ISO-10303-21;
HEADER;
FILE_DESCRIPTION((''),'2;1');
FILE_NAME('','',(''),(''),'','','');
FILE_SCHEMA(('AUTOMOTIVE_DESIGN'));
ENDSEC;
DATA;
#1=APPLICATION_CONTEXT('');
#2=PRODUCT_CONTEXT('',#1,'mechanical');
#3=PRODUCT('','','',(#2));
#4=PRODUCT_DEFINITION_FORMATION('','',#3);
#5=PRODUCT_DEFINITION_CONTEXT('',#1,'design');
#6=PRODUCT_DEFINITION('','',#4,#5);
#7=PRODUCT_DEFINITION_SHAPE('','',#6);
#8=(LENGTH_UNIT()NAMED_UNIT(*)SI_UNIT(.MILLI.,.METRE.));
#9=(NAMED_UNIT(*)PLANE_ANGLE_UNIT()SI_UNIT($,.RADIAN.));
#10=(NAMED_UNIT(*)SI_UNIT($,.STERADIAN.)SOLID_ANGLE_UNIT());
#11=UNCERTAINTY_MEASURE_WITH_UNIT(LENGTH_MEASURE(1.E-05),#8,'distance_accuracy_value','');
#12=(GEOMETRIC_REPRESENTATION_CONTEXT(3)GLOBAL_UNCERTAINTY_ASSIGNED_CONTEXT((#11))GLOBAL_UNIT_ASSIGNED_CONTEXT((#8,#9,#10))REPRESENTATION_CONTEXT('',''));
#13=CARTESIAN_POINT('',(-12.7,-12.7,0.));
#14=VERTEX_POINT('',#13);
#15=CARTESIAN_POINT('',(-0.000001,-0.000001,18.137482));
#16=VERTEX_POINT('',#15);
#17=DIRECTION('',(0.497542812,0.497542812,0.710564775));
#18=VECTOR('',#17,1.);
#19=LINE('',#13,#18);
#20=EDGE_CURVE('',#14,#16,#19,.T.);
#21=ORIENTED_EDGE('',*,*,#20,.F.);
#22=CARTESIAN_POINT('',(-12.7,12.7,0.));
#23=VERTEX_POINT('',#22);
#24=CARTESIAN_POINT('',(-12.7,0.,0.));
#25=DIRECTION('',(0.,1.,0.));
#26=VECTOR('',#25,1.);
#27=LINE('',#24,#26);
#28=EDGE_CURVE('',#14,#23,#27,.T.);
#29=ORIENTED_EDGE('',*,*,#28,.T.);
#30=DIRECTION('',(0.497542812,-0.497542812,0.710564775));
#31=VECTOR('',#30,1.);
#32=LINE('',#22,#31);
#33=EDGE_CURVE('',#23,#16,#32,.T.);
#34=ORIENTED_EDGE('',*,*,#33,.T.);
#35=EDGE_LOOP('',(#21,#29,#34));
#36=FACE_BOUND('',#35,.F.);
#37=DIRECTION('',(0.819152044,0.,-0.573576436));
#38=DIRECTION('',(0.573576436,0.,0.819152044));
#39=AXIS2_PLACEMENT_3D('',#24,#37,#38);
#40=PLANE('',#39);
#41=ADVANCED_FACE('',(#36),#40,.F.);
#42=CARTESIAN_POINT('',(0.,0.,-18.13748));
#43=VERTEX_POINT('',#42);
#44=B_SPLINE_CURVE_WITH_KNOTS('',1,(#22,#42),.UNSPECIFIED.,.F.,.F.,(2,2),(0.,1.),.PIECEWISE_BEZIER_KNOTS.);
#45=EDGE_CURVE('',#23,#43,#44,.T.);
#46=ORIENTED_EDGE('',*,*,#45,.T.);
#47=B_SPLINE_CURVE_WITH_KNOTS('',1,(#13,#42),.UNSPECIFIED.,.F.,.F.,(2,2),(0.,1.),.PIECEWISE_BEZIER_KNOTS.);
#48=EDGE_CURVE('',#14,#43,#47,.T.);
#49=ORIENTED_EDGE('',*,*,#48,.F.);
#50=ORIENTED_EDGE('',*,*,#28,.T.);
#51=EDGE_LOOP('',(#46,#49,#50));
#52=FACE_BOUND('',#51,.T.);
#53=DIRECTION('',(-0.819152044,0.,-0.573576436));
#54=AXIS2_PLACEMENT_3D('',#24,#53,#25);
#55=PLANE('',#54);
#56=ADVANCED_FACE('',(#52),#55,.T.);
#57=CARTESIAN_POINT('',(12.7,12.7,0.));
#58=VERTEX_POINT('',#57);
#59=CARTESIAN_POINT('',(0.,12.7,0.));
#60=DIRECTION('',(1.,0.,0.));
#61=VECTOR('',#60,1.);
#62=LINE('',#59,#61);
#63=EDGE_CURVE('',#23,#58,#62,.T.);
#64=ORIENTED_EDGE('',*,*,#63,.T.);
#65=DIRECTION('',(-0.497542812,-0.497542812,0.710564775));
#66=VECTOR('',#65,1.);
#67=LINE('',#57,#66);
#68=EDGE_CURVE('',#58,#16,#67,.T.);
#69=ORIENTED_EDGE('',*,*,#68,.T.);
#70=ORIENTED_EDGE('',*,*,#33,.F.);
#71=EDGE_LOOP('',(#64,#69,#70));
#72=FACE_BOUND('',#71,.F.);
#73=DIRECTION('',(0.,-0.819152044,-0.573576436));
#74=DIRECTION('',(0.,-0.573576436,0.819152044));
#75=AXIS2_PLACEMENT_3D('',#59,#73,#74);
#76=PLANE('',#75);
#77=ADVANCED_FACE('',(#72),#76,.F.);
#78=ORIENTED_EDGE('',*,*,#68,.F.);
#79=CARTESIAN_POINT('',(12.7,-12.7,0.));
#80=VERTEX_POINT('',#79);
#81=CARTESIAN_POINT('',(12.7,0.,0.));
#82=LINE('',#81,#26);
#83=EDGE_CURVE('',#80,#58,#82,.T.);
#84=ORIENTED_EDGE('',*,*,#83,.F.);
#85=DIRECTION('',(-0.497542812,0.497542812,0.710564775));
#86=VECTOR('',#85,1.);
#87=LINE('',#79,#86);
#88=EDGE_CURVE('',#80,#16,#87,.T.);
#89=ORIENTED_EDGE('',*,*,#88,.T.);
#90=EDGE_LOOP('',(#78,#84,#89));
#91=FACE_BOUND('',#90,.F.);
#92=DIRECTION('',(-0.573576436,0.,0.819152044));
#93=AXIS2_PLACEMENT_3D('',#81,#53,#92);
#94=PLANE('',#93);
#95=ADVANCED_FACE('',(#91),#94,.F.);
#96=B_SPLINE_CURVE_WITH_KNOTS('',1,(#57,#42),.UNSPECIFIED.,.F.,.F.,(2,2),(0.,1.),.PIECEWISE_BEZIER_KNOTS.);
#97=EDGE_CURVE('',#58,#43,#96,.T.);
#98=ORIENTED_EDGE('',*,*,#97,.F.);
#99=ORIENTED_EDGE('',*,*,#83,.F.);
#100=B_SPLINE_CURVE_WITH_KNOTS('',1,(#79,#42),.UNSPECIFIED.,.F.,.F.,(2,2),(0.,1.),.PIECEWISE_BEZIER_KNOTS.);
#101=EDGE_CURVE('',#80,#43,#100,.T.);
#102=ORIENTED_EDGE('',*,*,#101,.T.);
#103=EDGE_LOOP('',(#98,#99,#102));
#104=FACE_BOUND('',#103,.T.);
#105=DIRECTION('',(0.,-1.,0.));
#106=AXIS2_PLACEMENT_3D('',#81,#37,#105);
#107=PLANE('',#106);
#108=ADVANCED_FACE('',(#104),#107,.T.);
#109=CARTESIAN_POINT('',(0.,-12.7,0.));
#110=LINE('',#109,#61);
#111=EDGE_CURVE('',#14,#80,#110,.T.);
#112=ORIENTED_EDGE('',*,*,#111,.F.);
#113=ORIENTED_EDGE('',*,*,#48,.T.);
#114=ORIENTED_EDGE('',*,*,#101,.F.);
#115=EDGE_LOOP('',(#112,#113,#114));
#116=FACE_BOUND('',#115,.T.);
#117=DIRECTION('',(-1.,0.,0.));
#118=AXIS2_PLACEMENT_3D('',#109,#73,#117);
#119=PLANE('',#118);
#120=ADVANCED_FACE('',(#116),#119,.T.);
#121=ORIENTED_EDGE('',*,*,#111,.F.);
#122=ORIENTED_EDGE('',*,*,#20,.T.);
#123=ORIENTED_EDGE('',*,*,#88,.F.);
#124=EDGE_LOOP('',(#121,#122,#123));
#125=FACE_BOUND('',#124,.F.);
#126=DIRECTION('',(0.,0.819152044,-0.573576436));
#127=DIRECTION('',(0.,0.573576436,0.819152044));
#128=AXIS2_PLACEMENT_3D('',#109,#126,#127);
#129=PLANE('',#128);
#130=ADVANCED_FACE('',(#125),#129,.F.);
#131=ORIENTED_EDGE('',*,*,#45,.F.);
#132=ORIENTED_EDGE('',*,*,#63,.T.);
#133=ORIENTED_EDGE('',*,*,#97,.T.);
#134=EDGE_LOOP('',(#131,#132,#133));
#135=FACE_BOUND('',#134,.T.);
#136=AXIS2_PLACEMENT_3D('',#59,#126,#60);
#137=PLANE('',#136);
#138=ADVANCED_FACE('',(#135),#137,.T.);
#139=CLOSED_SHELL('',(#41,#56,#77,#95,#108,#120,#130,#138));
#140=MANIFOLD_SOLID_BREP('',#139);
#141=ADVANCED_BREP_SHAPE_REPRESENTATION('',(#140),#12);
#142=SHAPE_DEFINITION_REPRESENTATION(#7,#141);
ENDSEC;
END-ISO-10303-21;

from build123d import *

# Parameters (mm, degrees)
F0_W      = 25.4
F0_H      = 25.4
F1_DEPTH  = 25.4
F1_TAPER  = 35
F1_FACE_W = 25.4
F1_FACE_H = 25.4


# Not quite as in the source:
# - an extrude whose draft closes it to a point is written as a loft to that point


with BuildPart() as f1:
    # F0 (on Top) → F1 (new body)
    with BuildSketch(Plane.XY):
        Rectangle(F0_W, F0_H)
    extrude(amount=F1_DEPTH, taper=F1_TAPER)

    # F1_face (on face) → F2 section 0
    with BuildSketch(Plane(origin=(0, 0, 0), x_dir=(1, 0, 0), z_dir=(0, 0, -1)), mode=Mode.PRIVATE) as f2_s0:
        Rectangle(F1_FACE_W, F1_FACE_H)
    loft([f2_s0.sketch, Vertex(0, 0, -18.1374796856)], ruled=True)


solid = f1.part
